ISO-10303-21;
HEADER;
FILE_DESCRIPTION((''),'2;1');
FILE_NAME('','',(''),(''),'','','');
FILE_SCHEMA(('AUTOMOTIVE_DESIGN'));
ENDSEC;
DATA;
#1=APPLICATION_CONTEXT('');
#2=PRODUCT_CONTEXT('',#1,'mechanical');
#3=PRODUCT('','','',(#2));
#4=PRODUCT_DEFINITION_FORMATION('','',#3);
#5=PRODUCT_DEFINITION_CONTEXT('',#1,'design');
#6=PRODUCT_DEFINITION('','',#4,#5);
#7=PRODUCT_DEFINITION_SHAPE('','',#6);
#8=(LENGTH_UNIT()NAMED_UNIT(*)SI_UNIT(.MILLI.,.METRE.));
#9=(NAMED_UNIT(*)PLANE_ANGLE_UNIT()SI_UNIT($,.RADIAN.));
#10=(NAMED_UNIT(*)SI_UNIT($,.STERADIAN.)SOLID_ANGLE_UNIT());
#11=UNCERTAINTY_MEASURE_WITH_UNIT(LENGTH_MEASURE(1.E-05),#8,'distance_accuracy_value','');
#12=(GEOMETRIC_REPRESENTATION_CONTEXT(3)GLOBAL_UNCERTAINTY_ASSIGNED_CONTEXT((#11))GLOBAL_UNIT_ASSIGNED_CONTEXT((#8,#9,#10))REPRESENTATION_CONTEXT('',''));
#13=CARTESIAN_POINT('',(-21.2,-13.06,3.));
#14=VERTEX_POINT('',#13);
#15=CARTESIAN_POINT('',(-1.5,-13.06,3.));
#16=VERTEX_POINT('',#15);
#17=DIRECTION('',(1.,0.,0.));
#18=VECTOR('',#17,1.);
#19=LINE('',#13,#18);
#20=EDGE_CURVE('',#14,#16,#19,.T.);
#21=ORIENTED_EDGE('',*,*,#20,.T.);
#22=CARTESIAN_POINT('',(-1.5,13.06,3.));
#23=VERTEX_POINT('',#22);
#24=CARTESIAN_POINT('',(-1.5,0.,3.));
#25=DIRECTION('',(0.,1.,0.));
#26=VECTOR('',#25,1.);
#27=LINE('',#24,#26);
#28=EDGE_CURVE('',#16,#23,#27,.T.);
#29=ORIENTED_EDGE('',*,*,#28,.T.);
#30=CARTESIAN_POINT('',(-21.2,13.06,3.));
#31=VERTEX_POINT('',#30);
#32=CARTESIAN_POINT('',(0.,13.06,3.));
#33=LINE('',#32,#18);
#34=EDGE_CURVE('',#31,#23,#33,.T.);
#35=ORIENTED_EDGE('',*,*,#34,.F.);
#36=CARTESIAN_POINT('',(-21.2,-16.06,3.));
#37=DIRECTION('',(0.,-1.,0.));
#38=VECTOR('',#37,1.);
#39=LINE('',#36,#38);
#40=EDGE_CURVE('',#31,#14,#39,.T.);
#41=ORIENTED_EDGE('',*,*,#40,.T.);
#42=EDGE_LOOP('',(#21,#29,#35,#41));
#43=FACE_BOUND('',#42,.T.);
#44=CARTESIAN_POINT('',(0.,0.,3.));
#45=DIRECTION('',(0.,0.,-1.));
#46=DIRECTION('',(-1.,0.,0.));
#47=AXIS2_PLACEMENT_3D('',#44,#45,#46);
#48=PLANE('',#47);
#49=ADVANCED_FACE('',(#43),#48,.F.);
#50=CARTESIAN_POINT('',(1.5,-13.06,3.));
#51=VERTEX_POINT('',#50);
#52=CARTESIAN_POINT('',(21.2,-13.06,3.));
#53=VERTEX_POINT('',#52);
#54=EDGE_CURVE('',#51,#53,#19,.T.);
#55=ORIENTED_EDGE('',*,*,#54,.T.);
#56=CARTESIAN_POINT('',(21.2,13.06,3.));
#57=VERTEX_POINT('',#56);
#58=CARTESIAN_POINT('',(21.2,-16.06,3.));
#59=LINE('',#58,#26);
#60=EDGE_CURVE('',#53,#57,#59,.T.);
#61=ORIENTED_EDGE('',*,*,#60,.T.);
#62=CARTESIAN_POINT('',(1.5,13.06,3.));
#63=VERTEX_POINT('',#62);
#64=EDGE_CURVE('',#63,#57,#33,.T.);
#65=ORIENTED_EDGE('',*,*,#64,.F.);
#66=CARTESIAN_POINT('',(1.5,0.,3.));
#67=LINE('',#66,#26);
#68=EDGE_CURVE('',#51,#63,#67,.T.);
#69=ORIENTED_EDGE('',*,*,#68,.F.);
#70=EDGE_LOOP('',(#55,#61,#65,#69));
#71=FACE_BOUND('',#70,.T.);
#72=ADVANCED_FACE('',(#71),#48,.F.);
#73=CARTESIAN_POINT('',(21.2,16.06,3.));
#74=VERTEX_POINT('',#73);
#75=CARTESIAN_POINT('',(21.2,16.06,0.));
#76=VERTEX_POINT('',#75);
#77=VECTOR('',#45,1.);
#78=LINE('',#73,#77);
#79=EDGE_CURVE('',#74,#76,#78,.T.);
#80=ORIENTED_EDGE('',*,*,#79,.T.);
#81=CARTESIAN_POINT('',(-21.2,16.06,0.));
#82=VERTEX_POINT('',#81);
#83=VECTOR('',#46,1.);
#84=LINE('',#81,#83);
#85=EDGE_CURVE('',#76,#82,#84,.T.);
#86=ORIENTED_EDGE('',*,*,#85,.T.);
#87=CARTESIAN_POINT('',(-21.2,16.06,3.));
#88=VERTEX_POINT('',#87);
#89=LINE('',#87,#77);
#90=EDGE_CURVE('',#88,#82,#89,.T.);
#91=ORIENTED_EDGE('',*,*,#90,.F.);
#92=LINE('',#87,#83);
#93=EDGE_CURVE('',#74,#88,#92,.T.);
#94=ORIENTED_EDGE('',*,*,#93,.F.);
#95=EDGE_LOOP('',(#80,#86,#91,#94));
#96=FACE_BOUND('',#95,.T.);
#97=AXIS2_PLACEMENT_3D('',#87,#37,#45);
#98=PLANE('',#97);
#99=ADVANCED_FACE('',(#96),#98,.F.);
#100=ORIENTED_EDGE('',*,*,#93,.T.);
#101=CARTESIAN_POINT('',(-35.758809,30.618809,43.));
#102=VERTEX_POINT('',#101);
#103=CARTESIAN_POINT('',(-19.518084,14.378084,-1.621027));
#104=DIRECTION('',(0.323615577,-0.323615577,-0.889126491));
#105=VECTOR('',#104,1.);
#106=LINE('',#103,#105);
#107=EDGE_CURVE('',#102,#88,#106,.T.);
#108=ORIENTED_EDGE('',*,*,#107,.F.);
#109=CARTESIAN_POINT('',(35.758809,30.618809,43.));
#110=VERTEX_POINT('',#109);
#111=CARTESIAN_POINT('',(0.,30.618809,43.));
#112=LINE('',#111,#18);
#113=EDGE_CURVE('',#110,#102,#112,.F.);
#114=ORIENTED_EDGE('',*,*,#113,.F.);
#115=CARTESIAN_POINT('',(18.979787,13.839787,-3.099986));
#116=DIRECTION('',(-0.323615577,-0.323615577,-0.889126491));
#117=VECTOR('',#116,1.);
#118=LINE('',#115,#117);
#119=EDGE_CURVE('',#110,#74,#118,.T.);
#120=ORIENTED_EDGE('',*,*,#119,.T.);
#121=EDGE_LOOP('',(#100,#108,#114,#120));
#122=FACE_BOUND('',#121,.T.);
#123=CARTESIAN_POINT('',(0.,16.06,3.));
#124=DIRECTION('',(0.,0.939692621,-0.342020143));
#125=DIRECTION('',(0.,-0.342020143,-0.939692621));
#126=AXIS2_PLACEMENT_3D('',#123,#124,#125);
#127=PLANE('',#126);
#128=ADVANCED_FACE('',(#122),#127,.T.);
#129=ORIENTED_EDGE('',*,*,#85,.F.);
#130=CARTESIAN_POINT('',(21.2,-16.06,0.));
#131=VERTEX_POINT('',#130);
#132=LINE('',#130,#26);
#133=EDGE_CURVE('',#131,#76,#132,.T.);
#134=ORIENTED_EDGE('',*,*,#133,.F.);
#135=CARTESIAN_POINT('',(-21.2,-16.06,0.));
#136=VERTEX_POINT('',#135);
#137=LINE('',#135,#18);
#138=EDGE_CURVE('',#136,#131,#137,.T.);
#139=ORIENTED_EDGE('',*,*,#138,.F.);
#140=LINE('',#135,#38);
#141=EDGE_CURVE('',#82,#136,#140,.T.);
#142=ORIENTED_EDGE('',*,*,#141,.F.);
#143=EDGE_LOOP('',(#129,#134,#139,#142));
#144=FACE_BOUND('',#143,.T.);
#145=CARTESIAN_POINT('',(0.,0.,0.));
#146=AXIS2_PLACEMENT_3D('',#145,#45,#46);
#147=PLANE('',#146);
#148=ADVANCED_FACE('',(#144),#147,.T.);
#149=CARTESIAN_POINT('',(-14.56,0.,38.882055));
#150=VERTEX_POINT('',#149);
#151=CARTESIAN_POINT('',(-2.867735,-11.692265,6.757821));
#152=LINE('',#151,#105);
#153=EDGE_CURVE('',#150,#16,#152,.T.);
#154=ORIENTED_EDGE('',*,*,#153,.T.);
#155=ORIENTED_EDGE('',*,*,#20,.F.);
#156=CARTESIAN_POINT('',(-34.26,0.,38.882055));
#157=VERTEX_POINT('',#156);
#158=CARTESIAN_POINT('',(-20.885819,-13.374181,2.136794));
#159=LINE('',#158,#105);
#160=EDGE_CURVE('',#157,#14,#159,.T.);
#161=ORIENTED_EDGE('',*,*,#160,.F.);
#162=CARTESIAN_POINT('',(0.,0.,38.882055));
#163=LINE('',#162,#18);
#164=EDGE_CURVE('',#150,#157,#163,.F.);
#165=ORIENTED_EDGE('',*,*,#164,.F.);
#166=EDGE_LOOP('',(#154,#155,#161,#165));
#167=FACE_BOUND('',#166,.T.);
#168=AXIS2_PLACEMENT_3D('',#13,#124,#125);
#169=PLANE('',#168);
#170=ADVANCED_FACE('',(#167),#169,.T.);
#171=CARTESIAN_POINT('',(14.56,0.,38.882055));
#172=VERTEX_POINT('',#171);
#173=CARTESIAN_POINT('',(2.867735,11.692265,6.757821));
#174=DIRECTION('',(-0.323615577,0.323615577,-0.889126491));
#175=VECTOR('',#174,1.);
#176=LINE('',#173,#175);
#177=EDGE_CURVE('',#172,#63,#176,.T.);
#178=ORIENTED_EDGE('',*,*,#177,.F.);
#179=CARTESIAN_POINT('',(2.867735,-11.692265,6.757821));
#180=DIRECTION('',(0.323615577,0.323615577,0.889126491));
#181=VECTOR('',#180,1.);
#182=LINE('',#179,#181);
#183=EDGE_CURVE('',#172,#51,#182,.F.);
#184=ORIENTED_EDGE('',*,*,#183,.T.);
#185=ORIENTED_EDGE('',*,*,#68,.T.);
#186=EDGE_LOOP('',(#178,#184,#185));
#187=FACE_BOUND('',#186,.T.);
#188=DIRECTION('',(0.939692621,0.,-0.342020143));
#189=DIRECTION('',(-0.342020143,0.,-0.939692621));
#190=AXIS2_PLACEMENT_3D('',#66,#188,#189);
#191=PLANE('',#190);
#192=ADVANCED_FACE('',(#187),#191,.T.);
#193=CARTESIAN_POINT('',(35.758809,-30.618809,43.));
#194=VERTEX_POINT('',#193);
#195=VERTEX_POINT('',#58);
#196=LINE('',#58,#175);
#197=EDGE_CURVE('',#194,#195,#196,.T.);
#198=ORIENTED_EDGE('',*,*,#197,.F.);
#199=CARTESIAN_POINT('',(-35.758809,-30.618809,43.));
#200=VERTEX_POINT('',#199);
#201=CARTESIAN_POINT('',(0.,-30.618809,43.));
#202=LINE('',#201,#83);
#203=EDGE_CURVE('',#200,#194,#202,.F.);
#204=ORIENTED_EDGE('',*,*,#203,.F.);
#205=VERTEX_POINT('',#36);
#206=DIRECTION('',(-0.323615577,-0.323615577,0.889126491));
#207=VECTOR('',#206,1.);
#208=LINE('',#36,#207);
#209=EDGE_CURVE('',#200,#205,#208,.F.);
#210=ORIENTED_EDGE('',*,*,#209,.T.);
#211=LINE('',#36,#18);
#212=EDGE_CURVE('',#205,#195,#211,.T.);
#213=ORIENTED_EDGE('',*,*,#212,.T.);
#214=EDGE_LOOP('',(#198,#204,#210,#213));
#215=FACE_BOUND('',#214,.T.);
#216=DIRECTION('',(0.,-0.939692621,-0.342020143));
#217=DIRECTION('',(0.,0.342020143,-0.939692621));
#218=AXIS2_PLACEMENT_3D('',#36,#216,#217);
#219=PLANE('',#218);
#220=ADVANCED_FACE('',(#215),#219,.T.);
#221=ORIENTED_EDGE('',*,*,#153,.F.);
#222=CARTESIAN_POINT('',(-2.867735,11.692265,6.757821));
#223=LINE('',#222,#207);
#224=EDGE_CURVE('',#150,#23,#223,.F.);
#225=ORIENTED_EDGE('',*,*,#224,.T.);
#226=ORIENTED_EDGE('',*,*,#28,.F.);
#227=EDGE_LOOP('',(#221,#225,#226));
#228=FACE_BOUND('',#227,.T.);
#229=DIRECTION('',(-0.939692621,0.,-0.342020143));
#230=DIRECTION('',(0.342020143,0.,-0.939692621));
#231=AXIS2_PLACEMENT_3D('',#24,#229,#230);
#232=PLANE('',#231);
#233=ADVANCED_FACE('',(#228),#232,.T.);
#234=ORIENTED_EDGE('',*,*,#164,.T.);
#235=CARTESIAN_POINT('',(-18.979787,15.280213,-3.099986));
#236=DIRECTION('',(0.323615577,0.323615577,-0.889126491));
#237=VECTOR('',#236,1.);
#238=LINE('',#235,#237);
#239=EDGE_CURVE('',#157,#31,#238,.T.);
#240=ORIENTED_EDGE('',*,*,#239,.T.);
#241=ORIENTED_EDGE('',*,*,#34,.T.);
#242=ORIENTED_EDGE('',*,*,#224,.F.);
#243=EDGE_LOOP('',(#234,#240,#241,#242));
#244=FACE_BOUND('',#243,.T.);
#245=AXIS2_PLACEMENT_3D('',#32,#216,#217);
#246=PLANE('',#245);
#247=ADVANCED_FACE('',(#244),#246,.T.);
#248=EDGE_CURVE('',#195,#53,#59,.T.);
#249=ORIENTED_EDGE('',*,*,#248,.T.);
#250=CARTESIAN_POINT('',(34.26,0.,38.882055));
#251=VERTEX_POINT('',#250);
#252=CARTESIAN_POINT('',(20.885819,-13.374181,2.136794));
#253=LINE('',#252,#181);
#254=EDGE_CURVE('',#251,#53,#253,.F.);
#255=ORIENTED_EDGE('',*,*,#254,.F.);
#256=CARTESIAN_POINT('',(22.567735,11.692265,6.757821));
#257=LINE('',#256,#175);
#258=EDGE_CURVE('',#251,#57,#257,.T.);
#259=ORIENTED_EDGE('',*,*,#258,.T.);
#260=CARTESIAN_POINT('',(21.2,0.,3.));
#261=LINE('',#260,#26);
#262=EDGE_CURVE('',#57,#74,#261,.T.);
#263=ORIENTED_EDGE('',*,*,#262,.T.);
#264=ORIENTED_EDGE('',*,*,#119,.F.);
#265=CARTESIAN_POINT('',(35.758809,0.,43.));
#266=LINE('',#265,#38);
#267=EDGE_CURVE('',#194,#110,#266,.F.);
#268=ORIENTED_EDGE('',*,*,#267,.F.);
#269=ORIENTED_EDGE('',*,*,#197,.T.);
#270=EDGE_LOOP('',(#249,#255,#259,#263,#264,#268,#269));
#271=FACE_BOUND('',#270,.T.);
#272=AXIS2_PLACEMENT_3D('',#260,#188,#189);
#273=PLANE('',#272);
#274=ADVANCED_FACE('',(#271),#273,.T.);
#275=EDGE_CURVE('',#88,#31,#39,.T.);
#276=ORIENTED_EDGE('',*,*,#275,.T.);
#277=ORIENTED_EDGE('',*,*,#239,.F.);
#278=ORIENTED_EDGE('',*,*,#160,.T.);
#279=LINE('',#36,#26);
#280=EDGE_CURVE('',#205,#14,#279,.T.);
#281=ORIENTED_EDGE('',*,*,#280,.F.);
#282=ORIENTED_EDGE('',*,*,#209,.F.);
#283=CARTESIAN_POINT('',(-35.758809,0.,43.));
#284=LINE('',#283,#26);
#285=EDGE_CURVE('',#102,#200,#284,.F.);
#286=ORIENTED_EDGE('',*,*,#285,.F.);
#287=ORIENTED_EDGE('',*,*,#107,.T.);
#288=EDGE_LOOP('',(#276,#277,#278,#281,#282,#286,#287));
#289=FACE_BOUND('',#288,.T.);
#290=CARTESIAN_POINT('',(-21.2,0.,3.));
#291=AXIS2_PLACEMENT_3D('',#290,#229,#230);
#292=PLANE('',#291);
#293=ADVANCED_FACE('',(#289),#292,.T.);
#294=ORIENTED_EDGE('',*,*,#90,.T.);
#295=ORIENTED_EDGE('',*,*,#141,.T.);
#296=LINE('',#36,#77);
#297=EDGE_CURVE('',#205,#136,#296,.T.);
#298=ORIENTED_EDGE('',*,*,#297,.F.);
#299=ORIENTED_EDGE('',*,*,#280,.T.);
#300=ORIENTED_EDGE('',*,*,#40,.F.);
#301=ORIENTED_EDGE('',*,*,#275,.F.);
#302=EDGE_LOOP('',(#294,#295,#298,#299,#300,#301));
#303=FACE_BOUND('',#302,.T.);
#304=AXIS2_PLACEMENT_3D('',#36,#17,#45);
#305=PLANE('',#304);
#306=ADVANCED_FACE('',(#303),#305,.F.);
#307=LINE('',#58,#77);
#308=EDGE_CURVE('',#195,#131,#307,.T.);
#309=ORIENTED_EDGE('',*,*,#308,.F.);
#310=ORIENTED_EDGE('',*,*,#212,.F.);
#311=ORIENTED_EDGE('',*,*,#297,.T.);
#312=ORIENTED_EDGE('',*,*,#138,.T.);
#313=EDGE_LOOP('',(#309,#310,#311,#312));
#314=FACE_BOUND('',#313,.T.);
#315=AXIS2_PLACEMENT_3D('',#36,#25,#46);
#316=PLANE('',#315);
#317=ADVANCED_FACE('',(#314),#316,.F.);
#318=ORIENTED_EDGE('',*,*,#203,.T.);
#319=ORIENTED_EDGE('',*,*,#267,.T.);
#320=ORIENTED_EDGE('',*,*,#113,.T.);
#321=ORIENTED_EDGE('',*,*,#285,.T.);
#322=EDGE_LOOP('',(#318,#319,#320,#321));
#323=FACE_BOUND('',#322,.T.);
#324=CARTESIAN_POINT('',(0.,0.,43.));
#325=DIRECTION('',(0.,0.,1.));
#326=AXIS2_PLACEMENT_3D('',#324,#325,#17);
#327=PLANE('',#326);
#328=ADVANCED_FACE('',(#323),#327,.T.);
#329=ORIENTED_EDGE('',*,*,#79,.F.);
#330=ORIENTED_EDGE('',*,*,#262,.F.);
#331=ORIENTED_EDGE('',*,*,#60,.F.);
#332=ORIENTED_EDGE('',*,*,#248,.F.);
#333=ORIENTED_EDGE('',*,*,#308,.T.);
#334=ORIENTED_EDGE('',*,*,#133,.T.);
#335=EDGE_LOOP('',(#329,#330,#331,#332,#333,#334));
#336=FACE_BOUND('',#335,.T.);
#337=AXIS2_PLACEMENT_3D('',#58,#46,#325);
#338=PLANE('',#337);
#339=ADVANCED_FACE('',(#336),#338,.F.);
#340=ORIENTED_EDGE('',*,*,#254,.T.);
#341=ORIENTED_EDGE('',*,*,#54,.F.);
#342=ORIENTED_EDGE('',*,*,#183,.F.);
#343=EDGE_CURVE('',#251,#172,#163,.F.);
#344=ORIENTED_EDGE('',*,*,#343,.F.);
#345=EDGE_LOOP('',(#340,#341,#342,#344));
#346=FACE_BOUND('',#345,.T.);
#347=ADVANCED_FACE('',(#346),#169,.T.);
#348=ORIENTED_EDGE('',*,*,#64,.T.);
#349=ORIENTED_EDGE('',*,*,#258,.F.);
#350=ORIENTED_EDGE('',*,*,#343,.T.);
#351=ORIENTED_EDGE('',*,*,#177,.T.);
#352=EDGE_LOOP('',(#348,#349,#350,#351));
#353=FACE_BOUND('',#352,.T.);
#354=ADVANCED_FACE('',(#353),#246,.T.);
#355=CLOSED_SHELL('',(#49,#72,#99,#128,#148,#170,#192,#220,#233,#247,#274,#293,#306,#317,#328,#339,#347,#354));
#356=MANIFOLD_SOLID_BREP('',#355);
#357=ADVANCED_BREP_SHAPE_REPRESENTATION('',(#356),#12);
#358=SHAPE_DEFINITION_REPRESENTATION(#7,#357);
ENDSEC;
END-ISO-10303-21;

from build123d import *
from build123d.topology import SkipClean

# Parameters (mm, degrees)
SKETCH1_W           = 42.4
SKETCH1_H           = 32.12
BOSS_EXTRUDE1_DEPTH = 3
SKETCH2_W           = 42.4
SKETCH2_H           = 3
SKETCH2_W_2         = 3
SKETCH2_H_2         = 32.12
BOSS_EXTRUDE2_DEPTH = 40
BOSS_EXTRUDE2_TAPER = -20


with BuildPart() as part:
    # Sketch1 → Boss-Extrude1 (new body)
    with BuildSketch(Plane.XY):
        Rectangle(SKETCH1_W, SKETCH1_H)
    extrude(amount=BOSS_EXTRUDE1_DEPTH)

    # Sketch2 → Boss-Extrude2 (add)
    with SkipClean():  # the faces are left unmerged after this step: merging them gives an invalid solid
        with BuildSketch(Plane.XY.offset(3)):
            with Locations((0, 14.56)):
                Rectangle(SKETCH2_W, SKETCH2_H)
            with Locations((0, -14.56)):
                Rectangle(SKETCH2_W, SKETCH2_H)
            Rectangle(SKETCH2_W_2, SKETCH2_H_2)
        extrude(amount=BOSS_EXTRUDE2_DEPTH, taper=BOSS_EXTRUDE2_TAPER)
    add(part.part.scale(1), mode=Mode.REPLACE)  # the faces are merged on a copy


solid = part.part
